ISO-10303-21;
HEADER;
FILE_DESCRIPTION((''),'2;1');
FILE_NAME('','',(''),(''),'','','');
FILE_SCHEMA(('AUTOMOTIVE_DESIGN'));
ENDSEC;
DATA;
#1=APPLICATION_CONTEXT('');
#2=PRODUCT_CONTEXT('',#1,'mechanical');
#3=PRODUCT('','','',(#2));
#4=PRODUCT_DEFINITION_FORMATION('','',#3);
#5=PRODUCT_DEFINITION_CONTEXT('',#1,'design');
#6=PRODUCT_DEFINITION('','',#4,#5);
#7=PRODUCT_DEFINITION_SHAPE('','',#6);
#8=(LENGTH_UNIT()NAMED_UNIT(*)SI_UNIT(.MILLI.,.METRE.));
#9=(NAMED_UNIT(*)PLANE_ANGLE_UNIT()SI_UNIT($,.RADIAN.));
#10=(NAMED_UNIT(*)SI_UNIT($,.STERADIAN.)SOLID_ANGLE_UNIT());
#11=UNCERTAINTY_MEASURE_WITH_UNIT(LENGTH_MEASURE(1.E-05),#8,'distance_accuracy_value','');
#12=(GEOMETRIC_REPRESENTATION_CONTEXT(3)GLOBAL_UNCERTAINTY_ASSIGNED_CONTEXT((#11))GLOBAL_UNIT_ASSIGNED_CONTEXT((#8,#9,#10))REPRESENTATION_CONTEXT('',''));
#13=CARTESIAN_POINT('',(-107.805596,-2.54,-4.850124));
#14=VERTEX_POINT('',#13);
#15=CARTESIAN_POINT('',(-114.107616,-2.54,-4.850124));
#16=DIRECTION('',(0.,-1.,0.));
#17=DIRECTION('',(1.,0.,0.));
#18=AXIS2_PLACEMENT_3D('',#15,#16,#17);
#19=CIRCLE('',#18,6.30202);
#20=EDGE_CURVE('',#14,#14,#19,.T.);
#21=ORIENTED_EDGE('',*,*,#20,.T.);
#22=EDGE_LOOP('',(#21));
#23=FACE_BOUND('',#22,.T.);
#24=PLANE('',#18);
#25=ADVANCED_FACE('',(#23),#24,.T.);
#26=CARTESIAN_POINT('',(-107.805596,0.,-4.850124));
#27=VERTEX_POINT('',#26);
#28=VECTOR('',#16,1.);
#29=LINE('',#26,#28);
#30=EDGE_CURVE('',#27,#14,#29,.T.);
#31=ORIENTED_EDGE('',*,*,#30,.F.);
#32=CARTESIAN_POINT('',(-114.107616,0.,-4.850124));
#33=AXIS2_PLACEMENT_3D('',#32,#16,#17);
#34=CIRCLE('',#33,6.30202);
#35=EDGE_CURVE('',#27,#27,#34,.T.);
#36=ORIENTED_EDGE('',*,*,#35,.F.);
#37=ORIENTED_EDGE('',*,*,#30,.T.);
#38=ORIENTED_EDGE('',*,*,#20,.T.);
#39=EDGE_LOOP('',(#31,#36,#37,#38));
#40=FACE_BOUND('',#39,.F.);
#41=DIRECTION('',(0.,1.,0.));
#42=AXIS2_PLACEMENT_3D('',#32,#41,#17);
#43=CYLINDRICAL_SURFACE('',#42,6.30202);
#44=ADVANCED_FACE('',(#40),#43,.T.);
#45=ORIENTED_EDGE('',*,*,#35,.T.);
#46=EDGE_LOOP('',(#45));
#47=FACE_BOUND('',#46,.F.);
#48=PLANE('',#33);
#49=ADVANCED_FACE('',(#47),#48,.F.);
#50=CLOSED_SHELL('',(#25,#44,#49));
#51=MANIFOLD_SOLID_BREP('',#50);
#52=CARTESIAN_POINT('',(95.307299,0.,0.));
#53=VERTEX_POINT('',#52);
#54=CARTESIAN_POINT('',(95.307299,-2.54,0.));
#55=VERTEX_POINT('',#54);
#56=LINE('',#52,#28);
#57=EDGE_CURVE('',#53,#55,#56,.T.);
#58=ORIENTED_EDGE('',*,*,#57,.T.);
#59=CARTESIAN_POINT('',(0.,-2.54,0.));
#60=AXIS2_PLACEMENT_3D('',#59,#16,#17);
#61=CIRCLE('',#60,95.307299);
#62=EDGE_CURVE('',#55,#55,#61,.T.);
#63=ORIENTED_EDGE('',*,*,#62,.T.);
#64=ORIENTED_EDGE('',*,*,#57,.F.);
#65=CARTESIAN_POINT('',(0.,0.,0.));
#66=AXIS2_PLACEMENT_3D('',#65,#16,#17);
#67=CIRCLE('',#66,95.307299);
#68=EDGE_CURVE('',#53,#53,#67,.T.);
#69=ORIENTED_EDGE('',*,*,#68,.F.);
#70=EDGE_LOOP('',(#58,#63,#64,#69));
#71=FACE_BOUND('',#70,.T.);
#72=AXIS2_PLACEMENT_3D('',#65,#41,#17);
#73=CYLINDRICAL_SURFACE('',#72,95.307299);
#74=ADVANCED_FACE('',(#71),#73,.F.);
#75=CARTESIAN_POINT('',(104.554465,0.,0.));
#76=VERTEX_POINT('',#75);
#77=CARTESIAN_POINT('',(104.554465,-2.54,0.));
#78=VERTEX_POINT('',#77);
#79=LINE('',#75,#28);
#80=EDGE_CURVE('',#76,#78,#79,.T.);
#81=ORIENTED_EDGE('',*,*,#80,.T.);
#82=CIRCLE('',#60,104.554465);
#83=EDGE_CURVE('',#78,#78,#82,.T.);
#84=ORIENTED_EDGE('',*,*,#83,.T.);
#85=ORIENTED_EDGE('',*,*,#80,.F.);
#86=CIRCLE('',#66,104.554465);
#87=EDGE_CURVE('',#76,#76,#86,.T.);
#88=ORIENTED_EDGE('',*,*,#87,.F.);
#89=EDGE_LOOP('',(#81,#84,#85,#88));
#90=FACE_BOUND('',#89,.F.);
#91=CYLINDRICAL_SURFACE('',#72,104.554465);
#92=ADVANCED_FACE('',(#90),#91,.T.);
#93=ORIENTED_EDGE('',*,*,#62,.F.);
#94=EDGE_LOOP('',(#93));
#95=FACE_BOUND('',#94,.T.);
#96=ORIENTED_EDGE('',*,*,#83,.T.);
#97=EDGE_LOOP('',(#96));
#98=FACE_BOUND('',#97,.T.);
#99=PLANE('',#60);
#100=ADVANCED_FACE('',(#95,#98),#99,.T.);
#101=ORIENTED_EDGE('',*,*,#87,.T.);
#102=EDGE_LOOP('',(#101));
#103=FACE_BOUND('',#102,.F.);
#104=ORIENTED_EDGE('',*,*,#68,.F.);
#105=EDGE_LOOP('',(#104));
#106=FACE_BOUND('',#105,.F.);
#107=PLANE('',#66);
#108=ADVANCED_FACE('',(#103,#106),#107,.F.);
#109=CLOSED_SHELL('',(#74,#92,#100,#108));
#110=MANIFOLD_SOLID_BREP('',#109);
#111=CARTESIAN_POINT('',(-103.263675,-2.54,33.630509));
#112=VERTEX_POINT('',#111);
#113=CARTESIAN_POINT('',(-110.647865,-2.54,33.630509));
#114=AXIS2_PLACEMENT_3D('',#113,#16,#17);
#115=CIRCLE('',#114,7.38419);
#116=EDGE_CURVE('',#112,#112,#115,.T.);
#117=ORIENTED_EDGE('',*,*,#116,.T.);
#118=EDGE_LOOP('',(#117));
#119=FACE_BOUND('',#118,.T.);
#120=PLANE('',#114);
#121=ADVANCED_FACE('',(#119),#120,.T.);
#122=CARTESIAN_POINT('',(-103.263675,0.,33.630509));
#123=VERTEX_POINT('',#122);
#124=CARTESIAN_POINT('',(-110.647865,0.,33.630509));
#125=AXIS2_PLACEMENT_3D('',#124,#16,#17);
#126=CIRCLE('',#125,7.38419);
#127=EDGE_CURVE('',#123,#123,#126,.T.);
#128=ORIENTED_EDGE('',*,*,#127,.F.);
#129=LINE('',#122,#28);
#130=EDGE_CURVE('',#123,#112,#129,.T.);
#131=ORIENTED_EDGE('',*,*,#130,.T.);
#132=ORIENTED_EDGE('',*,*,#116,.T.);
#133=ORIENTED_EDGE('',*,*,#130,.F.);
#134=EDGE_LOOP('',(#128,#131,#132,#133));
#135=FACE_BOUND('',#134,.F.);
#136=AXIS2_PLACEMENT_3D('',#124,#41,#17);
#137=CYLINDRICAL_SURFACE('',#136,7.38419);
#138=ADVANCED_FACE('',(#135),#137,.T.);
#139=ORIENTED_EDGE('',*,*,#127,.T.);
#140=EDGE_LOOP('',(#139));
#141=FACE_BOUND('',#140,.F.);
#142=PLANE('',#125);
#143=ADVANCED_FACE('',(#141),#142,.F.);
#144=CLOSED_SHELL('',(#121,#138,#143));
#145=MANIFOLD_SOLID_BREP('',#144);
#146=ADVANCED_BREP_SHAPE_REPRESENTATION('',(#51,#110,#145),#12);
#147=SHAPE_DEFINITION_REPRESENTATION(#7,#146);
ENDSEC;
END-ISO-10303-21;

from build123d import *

# Parameters (mm, degrees)
F0_R     = 104.5544645938
F0_R_2   = 95.3072985624
F1_DEPTH = 2.54
F3_R     = 7.3841898205
F4_DEPTH = 2.54
F3_R_2   = 6.30202013
F5_DEPTH = 2.54


# Not quite as in the source:
# - the program builds the solid bodies; features that only make, move or delete a surface that nothing else refers to are left out


with BuildPart() as f1:
    # F0 (on Front) → F1 (new body)
    with BuildSketch(Plane.XZ):
        Circle(F0_R)
        Circle(F0_R_2, mode=Mode.SUBTRACT)
    extrude(amount=F1_DEPTH)


with BuildPart() as f4:
    # F3 (on Front) → F4 (new body)
    with BuildSketch(Plane.XZ):
        with Locations((-110.6478646398, 33.6305089295)):
            Circle(F3_R)
    extrude(amount=F4_DEPTH)


with BuildPart() as f5:
    # F3 (on Front) → F5 (new body)
    with BuildSketch(Plane.XZ):
        with Locations((-114.1076162457, -4.850124009)):
            Circle(F3_R_2)
    extrude(amount=F5_DEPTH)


solid = Compound([f1.part, f4.part, f5.part])
